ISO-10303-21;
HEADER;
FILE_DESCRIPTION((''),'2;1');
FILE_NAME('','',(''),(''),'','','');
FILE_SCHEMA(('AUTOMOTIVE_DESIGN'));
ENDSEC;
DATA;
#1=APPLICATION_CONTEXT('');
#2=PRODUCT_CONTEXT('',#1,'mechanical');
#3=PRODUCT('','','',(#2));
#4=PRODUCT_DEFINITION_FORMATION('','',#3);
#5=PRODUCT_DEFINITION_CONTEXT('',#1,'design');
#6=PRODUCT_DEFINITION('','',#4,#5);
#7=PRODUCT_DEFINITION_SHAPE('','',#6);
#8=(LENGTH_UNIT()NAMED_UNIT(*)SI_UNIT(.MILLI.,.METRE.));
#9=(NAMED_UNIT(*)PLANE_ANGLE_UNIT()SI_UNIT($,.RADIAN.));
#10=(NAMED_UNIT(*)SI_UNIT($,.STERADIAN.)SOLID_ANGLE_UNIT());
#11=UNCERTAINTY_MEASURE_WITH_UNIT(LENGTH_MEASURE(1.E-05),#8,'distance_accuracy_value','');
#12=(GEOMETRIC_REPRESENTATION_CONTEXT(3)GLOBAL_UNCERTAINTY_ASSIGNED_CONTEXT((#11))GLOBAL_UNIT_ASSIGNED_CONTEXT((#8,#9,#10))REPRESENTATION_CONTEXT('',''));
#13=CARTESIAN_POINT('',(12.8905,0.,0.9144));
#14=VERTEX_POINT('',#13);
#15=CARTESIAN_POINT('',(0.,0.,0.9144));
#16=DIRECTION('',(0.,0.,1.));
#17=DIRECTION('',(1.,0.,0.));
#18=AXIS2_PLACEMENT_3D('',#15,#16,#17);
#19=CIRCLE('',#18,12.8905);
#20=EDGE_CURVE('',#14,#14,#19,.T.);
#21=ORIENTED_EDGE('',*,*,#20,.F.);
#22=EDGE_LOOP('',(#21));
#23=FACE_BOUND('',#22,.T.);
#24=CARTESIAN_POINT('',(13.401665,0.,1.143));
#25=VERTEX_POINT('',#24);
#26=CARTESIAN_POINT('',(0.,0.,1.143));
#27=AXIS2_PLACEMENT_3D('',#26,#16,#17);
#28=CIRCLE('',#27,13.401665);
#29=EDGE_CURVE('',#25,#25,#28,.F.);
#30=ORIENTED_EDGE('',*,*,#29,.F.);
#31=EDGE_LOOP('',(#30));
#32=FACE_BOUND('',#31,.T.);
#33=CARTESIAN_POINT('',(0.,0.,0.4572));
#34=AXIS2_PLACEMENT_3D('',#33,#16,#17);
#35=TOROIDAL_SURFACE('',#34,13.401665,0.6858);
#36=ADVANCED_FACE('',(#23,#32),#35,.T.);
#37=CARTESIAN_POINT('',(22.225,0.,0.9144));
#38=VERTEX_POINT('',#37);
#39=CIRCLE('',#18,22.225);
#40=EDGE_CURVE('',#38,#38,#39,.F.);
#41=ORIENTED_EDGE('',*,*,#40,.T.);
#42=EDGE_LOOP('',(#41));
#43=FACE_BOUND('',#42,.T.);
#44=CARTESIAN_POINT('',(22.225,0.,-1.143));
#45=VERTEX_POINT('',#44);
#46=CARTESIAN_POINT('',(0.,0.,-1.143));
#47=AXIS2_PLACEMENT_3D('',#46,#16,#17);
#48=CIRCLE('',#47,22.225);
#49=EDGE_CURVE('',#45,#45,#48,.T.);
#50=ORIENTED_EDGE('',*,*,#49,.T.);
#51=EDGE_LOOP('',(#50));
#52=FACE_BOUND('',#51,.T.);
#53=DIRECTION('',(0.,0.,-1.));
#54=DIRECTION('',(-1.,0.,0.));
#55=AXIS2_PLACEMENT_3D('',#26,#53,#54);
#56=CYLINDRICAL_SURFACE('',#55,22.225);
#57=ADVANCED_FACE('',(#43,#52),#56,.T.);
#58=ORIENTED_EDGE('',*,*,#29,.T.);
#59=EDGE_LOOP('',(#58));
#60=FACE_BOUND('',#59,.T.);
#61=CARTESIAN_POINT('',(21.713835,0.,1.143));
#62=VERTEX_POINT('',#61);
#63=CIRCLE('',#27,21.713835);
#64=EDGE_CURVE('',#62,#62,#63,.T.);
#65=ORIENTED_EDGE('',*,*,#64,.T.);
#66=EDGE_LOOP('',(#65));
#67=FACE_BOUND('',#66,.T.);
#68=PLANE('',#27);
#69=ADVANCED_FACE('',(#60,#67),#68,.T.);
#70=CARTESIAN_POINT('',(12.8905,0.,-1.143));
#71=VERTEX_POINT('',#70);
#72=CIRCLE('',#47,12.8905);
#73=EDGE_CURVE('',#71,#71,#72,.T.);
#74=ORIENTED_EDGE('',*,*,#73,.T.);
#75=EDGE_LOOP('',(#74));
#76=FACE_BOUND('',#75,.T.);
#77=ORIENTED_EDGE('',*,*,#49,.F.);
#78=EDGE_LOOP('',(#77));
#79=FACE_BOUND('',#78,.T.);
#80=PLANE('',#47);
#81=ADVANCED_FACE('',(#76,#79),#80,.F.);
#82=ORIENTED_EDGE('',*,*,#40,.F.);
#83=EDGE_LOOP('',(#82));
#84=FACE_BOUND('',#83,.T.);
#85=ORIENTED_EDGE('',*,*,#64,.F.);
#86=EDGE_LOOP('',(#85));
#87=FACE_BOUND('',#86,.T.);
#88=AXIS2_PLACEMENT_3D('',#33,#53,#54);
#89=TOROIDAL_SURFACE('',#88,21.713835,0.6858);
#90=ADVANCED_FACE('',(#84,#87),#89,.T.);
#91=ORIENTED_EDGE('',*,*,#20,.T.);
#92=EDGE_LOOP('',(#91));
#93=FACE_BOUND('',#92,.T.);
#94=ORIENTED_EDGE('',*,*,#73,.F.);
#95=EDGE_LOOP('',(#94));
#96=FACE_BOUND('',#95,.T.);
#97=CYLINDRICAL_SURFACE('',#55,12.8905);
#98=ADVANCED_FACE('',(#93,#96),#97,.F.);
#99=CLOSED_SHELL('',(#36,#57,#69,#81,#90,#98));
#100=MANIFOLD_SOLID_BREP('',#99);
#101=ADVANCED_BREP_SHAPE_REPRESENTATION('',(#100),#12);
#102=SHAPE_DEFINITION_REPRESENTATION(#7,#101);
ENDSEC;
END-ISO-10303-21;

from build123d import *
from OCP.BRepFilletAPI import BRepFilletAPI_MakeChamfer

# Parameters (mm, degrees)
BOSS_EXTRUDE1_START = -1.143
SKETCH3_R           = 22.225
SKETCH3_R_2         = 12.8905
BOSS_EXTRUDE1_DEPTH = 2.286
CHAMFER1_SIZE       = 0.2286
CHAMFER1_SIZE2      = 0.131982272
FILLET1_R           = 0.6858


with BuildPart() as part:
    # Sketch3 → Boss-Extrude1 (new body)
    with BuildSketch(Plane.XY.offset(BOSS_EXTRUDE1_START)):
        Circle(SKETCH3_R)
        Circle(SKETCH3_R_2, mode=Mode.SUBTRACT)
    extrude(amount=BOSS_EXTRUDE1_DEPTH)

    # Chamfer1: one chamfer whose edges measure the first distance from different faces: ONE call of the kernel's chamfer builder (chamfer() names one face for all edges)
    chamfer1_edges_1 = [part.edges().sort_by_distance(p)[0] for p in [
        (-22.225, 0, 1.143),
    ]]
    chamfer1_side_1 = [part.faces().sort_by_distance(p)[0] for p in [
        (-22.225, 0, 0),
    ]]
    chamfer1_edges_2 = [part.edges().sort_by_distance(p)[0] for p in [
        (-12.8905, 0, 1.143),
    ]]
    chamfer1_side_2 = [part.faces().sort_by_distance(p)[0] for p in [
        (-12.8905, 0, 0),
    ]]
    chamfer1 = BRepFilletAPI_MakeChamfer(part.part.solid().wrapped)
    for e in chamfer1_edges_1:
        chamfer1.Add(CHAMFER1_SIZE, CHAMFER1_SIZE2, e.wrapped, chamfer1_side_1[0].wrapped)  # the first distance lies on this face
    for e in chamfer1_edges_2:
        chamfer1.Add(CHAMFER1_SIZE, CHAMFER1_SIZE2, e.wrapped, chamfer1_side_2[0].wrapped)  # the first distance lies on this face
    add(Compound.cast(chamfer1.Shape()), mode=Mode.REPLACE)

    # Fillet1
    # the kernel refuses this fillet: 0.6858 mm, written as the material it takes off along each edge
    with BuildSketch(Plane(origin=(0, 0, 1.143), x_dir=(1, 0, 0), z_dir=(0, -1, 0))) as fillet1_piece_1:
        with BuildLine():
            CenterArc((21.71383486, -0.6858), FILLET1_R, 41.810314896, 48.189685104)
            Line((21.71383486, 0), (21.71383486, 0.013716))
            Line((21.71383486, 0.013716), (22.093017728, 0.013716))
            Line((22.093017728, 0.013716), (22.104896133, 0.006858))
            ThreePointArc((22.104896133, 0.006858), (22.170887269, -0.107442), (22.235223303, -0.219456))
            Line((22.235223303, -0.219456), (22.225, -0.2286))
        make_face()
    revolve(axis=Axis((0, 0, 1.143), (0, 0, 1)), mode=Mode.SUBTRACT)
    with BuildSketch(Plane(origin=(0, 0, 1.143), x_dir=(1, 0, 0), z_dir=(0, -1, 0))) as fillet1_piece_2:
        with BuildLine():
            CenterArc((13.40166514, -0.6858), FILLET1_R, 90, 48.189685104)
            Line((12.8905, -0.2286), (12.880276697, -0.219456))
            ThreePointArc((12.880276697, -0.219456), (12.944612731, -0.107442), (13.010603867, 0.006858))
            Line((13.010603867, 0.006858), (13.022482272, 0.013716))
            Line((13.022482272, 0.013716), (13.40166514, 0.013716))
            Line((13.40166514, 0.013716), (13.40166514, 0))
        make_face()
    revolve(axis=Axis((0, 0, 1.143), (0, 0, 1)), mode=Mode.SUBTRACT)


solid = part.part
